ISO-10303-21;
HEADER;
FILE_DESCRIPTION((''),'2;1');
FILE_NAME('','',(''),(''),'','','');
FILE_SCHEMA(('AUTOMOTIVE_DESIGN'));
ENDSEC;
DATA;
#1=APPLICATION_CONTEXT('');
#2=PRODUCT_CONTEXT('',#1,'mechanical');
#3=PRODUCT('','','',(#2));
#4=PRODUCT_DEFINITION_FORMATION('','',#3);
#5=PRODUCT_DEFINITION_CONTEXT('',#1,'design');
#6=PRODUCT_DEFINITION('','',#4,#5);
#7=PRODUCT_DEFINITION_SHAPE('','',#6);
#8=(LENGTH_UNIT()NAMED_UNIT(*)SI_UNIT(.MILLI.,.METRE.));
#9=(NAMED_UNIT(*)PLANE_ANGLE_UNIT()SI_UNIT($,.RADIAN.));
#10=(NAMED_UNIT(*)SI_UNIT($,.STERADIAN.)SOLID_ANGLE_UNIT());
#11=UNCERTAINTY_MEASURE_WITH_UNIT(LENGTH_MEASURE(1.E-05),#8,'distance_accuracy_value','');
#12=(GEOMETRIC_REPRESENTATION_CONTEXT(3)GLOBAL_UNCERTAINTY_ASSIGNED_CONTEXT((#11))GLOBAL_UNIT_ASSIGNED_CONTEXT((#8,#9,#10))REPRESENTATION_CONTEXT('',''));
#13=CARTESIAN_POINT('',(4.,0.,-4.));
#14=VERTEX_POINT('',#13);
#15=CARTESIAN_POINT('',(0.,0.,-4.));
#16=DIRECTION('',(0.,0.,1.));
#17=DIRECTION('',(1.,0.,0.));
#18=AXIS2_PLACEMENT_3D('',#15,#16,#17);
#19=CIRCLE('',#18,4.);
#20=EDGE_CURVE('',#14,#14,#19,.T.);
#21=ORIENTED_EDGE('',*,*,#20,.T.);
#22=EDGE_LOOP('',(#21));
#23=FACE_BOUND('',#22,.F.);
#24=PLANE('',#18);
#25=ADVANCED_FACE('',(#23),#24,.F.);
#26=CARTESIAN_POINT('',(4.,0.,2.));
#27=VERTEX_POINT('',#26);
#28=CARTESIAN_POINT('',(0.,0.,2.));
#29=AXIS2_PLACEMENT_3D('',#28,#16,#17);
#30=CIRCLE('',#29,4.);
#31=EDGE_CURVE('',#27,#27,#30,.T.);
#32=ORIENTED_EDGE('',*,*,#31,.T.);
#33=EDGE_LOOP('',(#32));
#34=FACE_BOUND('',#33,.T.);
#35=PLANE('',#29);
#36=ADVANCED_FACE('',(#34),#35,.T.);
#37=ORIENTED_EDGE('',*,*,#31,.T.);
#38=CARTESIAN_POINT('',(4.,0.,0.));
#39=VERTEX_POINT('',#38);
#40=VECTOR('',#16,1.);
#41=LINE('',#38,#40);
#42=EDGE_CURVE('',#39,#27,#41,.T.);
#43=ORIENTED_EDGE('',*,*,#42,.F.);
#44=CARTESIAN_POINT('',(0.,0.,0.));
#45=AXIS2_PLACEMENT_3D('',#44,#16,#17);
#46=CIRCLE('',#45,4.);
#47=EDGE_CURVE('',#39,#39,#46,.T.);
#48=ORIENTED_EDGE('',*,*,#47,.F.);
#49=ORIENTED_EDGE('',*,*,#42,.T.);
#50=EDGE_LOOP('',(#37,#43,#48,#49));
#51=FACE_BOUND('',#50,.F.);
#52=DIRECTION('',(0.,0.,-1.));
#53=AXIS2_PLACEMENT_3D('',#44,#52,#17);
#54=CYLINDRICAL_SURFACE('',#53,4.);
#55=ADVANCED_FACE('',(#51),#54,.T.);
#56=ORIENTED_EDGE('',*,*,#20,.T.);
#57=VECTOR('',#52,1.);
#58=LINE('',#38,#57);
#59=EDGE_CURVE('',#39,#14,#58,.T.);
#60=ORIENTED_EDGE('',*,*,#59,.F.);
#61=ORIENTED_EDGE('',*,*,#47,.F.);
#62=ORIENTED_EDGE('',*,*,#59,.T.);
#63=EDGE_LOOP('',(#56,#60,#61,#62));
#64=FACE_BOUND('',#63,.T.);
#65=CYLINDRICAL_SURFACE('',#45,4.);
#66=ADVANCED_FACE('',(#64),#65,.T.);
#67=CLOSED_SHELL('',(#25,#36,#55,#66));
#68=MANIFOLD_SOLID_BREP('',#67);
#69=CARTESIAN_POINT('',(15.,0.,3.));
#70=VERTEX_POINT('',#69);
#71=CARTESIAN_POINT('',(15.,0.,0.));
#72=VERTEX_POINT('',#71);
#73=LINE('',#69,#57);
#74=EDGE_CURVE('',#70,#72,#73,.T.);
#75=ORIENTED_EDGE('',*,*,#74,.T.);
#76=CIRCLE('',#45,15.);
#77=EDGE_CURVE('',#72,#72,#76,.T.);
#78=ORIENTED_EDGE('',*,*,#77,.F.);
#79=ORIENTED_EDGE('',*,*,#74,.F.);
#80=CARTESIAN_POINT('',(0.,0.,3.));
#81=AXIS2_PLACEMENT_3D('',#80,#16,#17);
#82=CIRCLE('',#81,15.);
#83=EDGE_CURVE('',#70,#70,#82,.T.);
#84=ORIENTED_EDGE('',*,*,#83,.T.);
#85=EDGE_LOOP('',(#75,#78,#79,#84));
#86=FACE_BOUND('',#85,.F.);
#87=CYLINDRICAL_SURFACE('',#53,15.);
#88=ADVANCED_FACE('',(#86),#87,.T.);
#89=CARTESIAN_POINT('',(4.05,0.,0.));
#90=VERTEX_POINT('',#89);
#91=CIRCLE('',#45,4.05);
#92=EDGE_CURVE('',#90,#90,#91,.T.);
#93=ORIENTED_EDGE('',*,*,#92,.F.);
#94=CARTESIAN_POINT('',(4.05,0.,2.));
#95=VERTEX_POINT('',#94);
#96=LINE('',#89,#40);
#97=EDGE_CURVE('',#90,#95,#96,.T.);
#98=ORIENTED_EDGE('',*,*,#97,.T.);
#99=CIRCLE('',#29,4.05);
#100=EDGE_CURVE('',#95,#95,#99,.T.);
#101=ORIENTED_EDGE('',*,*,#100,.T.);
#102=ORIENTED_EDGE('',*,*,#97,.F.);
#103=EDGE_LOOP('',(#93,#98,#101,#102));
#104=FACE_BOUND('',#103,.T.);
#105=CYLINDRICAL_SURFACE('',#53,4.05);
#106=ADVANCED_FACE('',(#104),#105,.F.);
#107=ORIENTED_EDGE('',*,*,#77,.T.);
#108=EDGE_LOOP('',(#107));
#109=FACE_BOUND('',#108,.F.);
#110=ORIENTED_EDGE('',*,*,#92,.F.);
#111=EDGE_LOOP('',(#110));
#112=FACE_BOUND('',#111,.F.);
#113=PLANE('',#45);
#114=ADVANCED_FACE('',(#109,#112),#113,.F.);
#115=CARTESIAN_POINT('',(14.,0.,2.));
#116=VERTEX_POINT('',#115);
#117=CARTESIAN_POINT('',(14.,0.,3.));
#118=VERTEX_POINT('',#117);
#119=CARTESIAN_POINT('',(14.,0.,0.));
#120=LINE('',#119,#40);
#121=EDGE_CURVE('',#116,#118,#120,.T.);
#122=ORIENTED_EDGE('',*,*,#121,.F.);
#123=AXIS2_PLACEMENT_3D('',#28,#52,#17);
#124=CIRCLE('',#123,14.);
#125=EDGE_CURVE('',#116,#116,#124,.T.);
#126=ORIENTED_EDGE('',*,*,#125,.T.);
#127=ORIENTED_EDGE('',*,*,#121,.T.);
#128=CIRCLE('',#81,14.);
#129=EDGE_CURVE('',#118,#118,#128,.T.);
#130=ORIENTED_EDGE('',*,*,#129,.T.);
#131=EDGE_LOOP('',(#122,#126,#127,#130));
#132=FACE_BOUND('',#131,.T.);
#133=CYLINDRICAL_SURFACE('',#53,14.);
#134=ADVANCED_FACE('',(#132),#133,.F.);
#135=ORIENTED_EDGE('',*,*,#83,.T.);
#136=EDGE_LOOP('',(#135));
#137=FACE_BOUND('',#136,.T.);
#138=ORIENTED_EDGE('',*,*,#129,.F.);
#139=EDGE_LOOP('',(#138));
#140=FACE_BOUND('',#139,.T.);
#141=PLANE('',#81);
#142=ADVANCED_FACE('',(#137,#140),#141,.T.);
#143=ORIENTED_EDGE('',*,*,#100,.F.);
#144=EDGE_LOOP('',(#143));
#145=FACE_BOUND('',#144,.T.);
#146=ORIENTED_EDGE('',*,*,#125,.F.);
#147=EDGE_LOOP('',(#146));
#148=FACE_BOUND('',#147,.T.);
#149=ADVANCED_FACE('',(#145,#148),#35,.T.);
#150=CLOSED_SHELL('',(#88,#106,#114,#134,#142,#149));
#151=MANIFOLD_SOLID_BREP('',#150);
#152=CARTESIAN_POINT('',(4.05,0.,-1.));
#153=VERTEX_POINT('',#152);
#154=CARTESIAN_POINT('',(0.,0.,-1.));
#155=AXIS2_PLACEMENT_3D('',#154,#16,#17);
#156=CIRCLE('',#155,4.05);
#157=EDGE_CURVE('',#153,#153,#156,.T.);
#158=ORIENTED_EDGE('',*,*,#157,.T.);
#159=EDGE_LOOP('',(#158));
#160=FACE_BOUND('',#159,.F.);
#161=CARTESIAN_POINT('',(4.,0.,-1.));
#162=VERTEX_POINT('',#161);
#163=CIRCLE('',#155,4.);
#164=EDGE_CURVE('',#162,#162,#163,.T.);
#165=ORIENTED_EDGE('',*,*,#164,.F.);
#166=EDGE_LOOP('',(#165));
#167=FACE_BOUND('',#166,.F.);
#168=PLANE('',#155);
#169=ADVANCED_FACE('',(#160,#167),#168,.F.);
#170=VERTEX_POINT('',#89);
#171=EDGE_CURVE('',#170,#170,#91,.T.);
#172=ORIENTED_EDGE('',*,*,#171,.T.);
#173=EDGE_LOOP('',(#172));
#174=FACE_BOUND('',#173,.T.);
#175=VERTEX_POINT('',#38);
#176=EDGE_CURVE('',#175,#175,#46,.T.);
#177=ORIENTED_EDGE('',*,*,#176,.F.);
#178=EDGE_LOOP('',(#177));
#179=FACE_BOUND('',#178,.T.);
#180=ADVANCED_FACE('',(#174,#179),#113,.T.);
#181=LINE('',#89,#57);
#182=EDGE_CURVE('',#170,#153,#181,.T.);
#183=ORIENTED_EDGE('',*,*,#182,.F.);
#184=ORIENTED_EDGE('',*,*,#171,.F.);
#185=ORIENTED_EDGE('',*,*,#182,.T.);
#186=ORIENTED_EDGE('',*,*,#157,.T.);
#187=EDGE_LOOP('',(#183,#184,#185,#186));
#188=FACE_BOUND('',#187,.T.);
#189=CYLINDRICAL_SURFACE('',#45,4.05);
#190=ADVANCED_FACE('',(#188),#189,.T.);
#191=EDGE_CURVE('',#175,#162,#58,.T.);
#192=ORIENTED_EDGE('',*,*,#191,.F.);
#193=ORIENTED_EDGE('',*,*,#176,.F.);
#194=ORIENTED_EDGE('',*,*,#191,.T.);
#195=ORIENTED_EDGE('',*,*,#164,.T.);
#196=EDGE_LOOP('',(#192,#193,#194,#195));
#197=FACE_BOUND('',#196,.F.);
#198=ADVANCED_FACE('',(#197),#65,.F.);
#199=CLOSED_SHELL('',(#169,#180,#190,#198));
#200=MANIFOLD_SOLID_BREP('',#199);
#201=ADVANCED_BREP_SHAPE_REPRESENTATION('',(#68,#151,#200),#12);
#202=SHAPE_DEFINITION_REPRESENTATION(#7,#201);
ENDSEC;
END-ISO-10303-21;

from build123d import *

# Parameters (mm, degrees)
F0_R     = 4
F1_DEPTH = 4
F0_R_2   = 4.05
F2_DEPTH = 1
F3_DEPTH = 2
F0_R_3   = 15
F0_R_4   = 14
F0_R_5   = 11
F4_DEPTH = 3


with BuildPart() as f1:
    # F0 (on Top) → F1 (new body)
    with BuildSketch(Plane.XY):
        Circle(F0_R)
    extrude(amount=-F1_DEPTH)

    # F0 (on Top) → F3 (join)
    with BuildSketch(Plane.XY):
        Circle(F0_R)
    extrude(amount=F3_DEPTH)


with BuildPart() as f2:
    # F0 (on Top) → F2 (new body)
    with BuildSketch(Plane.XY):
        Circle(F0_R_2)
        Circle(F0_R, mode=Mode.SUBTRACT)
    extrude(amount=-F2_DEPTH)


with BuildPart() as f3:
    # F0 (on Top) → F3, piece 2 (new body)
    with BuildSketch(Plane.XY):
        Circle(F0_R_3)
        Circle(F0_R_4, mode=Mode.SUBTRACT)
        Circle(F0_R_4)
        Circle(F0_R_5, mode=Mode.SUBTRACT)
        Circle(F0_R_5)
        Circle(F0_R_2, mode=Mode.SUBTRACT)
    extrude(amount=F3_DEPTH)

    # F0 (on Top) → F4 (join)
    with BuildSketch(Plane.XY):
        Circle(F0_R_3)
        Circle(F0_R_4, mode=Mode.SUBTRACT)
    extrude(amount=F4_DEPTH)


solid = Compound([f1.part, f2.part, f3.part])
